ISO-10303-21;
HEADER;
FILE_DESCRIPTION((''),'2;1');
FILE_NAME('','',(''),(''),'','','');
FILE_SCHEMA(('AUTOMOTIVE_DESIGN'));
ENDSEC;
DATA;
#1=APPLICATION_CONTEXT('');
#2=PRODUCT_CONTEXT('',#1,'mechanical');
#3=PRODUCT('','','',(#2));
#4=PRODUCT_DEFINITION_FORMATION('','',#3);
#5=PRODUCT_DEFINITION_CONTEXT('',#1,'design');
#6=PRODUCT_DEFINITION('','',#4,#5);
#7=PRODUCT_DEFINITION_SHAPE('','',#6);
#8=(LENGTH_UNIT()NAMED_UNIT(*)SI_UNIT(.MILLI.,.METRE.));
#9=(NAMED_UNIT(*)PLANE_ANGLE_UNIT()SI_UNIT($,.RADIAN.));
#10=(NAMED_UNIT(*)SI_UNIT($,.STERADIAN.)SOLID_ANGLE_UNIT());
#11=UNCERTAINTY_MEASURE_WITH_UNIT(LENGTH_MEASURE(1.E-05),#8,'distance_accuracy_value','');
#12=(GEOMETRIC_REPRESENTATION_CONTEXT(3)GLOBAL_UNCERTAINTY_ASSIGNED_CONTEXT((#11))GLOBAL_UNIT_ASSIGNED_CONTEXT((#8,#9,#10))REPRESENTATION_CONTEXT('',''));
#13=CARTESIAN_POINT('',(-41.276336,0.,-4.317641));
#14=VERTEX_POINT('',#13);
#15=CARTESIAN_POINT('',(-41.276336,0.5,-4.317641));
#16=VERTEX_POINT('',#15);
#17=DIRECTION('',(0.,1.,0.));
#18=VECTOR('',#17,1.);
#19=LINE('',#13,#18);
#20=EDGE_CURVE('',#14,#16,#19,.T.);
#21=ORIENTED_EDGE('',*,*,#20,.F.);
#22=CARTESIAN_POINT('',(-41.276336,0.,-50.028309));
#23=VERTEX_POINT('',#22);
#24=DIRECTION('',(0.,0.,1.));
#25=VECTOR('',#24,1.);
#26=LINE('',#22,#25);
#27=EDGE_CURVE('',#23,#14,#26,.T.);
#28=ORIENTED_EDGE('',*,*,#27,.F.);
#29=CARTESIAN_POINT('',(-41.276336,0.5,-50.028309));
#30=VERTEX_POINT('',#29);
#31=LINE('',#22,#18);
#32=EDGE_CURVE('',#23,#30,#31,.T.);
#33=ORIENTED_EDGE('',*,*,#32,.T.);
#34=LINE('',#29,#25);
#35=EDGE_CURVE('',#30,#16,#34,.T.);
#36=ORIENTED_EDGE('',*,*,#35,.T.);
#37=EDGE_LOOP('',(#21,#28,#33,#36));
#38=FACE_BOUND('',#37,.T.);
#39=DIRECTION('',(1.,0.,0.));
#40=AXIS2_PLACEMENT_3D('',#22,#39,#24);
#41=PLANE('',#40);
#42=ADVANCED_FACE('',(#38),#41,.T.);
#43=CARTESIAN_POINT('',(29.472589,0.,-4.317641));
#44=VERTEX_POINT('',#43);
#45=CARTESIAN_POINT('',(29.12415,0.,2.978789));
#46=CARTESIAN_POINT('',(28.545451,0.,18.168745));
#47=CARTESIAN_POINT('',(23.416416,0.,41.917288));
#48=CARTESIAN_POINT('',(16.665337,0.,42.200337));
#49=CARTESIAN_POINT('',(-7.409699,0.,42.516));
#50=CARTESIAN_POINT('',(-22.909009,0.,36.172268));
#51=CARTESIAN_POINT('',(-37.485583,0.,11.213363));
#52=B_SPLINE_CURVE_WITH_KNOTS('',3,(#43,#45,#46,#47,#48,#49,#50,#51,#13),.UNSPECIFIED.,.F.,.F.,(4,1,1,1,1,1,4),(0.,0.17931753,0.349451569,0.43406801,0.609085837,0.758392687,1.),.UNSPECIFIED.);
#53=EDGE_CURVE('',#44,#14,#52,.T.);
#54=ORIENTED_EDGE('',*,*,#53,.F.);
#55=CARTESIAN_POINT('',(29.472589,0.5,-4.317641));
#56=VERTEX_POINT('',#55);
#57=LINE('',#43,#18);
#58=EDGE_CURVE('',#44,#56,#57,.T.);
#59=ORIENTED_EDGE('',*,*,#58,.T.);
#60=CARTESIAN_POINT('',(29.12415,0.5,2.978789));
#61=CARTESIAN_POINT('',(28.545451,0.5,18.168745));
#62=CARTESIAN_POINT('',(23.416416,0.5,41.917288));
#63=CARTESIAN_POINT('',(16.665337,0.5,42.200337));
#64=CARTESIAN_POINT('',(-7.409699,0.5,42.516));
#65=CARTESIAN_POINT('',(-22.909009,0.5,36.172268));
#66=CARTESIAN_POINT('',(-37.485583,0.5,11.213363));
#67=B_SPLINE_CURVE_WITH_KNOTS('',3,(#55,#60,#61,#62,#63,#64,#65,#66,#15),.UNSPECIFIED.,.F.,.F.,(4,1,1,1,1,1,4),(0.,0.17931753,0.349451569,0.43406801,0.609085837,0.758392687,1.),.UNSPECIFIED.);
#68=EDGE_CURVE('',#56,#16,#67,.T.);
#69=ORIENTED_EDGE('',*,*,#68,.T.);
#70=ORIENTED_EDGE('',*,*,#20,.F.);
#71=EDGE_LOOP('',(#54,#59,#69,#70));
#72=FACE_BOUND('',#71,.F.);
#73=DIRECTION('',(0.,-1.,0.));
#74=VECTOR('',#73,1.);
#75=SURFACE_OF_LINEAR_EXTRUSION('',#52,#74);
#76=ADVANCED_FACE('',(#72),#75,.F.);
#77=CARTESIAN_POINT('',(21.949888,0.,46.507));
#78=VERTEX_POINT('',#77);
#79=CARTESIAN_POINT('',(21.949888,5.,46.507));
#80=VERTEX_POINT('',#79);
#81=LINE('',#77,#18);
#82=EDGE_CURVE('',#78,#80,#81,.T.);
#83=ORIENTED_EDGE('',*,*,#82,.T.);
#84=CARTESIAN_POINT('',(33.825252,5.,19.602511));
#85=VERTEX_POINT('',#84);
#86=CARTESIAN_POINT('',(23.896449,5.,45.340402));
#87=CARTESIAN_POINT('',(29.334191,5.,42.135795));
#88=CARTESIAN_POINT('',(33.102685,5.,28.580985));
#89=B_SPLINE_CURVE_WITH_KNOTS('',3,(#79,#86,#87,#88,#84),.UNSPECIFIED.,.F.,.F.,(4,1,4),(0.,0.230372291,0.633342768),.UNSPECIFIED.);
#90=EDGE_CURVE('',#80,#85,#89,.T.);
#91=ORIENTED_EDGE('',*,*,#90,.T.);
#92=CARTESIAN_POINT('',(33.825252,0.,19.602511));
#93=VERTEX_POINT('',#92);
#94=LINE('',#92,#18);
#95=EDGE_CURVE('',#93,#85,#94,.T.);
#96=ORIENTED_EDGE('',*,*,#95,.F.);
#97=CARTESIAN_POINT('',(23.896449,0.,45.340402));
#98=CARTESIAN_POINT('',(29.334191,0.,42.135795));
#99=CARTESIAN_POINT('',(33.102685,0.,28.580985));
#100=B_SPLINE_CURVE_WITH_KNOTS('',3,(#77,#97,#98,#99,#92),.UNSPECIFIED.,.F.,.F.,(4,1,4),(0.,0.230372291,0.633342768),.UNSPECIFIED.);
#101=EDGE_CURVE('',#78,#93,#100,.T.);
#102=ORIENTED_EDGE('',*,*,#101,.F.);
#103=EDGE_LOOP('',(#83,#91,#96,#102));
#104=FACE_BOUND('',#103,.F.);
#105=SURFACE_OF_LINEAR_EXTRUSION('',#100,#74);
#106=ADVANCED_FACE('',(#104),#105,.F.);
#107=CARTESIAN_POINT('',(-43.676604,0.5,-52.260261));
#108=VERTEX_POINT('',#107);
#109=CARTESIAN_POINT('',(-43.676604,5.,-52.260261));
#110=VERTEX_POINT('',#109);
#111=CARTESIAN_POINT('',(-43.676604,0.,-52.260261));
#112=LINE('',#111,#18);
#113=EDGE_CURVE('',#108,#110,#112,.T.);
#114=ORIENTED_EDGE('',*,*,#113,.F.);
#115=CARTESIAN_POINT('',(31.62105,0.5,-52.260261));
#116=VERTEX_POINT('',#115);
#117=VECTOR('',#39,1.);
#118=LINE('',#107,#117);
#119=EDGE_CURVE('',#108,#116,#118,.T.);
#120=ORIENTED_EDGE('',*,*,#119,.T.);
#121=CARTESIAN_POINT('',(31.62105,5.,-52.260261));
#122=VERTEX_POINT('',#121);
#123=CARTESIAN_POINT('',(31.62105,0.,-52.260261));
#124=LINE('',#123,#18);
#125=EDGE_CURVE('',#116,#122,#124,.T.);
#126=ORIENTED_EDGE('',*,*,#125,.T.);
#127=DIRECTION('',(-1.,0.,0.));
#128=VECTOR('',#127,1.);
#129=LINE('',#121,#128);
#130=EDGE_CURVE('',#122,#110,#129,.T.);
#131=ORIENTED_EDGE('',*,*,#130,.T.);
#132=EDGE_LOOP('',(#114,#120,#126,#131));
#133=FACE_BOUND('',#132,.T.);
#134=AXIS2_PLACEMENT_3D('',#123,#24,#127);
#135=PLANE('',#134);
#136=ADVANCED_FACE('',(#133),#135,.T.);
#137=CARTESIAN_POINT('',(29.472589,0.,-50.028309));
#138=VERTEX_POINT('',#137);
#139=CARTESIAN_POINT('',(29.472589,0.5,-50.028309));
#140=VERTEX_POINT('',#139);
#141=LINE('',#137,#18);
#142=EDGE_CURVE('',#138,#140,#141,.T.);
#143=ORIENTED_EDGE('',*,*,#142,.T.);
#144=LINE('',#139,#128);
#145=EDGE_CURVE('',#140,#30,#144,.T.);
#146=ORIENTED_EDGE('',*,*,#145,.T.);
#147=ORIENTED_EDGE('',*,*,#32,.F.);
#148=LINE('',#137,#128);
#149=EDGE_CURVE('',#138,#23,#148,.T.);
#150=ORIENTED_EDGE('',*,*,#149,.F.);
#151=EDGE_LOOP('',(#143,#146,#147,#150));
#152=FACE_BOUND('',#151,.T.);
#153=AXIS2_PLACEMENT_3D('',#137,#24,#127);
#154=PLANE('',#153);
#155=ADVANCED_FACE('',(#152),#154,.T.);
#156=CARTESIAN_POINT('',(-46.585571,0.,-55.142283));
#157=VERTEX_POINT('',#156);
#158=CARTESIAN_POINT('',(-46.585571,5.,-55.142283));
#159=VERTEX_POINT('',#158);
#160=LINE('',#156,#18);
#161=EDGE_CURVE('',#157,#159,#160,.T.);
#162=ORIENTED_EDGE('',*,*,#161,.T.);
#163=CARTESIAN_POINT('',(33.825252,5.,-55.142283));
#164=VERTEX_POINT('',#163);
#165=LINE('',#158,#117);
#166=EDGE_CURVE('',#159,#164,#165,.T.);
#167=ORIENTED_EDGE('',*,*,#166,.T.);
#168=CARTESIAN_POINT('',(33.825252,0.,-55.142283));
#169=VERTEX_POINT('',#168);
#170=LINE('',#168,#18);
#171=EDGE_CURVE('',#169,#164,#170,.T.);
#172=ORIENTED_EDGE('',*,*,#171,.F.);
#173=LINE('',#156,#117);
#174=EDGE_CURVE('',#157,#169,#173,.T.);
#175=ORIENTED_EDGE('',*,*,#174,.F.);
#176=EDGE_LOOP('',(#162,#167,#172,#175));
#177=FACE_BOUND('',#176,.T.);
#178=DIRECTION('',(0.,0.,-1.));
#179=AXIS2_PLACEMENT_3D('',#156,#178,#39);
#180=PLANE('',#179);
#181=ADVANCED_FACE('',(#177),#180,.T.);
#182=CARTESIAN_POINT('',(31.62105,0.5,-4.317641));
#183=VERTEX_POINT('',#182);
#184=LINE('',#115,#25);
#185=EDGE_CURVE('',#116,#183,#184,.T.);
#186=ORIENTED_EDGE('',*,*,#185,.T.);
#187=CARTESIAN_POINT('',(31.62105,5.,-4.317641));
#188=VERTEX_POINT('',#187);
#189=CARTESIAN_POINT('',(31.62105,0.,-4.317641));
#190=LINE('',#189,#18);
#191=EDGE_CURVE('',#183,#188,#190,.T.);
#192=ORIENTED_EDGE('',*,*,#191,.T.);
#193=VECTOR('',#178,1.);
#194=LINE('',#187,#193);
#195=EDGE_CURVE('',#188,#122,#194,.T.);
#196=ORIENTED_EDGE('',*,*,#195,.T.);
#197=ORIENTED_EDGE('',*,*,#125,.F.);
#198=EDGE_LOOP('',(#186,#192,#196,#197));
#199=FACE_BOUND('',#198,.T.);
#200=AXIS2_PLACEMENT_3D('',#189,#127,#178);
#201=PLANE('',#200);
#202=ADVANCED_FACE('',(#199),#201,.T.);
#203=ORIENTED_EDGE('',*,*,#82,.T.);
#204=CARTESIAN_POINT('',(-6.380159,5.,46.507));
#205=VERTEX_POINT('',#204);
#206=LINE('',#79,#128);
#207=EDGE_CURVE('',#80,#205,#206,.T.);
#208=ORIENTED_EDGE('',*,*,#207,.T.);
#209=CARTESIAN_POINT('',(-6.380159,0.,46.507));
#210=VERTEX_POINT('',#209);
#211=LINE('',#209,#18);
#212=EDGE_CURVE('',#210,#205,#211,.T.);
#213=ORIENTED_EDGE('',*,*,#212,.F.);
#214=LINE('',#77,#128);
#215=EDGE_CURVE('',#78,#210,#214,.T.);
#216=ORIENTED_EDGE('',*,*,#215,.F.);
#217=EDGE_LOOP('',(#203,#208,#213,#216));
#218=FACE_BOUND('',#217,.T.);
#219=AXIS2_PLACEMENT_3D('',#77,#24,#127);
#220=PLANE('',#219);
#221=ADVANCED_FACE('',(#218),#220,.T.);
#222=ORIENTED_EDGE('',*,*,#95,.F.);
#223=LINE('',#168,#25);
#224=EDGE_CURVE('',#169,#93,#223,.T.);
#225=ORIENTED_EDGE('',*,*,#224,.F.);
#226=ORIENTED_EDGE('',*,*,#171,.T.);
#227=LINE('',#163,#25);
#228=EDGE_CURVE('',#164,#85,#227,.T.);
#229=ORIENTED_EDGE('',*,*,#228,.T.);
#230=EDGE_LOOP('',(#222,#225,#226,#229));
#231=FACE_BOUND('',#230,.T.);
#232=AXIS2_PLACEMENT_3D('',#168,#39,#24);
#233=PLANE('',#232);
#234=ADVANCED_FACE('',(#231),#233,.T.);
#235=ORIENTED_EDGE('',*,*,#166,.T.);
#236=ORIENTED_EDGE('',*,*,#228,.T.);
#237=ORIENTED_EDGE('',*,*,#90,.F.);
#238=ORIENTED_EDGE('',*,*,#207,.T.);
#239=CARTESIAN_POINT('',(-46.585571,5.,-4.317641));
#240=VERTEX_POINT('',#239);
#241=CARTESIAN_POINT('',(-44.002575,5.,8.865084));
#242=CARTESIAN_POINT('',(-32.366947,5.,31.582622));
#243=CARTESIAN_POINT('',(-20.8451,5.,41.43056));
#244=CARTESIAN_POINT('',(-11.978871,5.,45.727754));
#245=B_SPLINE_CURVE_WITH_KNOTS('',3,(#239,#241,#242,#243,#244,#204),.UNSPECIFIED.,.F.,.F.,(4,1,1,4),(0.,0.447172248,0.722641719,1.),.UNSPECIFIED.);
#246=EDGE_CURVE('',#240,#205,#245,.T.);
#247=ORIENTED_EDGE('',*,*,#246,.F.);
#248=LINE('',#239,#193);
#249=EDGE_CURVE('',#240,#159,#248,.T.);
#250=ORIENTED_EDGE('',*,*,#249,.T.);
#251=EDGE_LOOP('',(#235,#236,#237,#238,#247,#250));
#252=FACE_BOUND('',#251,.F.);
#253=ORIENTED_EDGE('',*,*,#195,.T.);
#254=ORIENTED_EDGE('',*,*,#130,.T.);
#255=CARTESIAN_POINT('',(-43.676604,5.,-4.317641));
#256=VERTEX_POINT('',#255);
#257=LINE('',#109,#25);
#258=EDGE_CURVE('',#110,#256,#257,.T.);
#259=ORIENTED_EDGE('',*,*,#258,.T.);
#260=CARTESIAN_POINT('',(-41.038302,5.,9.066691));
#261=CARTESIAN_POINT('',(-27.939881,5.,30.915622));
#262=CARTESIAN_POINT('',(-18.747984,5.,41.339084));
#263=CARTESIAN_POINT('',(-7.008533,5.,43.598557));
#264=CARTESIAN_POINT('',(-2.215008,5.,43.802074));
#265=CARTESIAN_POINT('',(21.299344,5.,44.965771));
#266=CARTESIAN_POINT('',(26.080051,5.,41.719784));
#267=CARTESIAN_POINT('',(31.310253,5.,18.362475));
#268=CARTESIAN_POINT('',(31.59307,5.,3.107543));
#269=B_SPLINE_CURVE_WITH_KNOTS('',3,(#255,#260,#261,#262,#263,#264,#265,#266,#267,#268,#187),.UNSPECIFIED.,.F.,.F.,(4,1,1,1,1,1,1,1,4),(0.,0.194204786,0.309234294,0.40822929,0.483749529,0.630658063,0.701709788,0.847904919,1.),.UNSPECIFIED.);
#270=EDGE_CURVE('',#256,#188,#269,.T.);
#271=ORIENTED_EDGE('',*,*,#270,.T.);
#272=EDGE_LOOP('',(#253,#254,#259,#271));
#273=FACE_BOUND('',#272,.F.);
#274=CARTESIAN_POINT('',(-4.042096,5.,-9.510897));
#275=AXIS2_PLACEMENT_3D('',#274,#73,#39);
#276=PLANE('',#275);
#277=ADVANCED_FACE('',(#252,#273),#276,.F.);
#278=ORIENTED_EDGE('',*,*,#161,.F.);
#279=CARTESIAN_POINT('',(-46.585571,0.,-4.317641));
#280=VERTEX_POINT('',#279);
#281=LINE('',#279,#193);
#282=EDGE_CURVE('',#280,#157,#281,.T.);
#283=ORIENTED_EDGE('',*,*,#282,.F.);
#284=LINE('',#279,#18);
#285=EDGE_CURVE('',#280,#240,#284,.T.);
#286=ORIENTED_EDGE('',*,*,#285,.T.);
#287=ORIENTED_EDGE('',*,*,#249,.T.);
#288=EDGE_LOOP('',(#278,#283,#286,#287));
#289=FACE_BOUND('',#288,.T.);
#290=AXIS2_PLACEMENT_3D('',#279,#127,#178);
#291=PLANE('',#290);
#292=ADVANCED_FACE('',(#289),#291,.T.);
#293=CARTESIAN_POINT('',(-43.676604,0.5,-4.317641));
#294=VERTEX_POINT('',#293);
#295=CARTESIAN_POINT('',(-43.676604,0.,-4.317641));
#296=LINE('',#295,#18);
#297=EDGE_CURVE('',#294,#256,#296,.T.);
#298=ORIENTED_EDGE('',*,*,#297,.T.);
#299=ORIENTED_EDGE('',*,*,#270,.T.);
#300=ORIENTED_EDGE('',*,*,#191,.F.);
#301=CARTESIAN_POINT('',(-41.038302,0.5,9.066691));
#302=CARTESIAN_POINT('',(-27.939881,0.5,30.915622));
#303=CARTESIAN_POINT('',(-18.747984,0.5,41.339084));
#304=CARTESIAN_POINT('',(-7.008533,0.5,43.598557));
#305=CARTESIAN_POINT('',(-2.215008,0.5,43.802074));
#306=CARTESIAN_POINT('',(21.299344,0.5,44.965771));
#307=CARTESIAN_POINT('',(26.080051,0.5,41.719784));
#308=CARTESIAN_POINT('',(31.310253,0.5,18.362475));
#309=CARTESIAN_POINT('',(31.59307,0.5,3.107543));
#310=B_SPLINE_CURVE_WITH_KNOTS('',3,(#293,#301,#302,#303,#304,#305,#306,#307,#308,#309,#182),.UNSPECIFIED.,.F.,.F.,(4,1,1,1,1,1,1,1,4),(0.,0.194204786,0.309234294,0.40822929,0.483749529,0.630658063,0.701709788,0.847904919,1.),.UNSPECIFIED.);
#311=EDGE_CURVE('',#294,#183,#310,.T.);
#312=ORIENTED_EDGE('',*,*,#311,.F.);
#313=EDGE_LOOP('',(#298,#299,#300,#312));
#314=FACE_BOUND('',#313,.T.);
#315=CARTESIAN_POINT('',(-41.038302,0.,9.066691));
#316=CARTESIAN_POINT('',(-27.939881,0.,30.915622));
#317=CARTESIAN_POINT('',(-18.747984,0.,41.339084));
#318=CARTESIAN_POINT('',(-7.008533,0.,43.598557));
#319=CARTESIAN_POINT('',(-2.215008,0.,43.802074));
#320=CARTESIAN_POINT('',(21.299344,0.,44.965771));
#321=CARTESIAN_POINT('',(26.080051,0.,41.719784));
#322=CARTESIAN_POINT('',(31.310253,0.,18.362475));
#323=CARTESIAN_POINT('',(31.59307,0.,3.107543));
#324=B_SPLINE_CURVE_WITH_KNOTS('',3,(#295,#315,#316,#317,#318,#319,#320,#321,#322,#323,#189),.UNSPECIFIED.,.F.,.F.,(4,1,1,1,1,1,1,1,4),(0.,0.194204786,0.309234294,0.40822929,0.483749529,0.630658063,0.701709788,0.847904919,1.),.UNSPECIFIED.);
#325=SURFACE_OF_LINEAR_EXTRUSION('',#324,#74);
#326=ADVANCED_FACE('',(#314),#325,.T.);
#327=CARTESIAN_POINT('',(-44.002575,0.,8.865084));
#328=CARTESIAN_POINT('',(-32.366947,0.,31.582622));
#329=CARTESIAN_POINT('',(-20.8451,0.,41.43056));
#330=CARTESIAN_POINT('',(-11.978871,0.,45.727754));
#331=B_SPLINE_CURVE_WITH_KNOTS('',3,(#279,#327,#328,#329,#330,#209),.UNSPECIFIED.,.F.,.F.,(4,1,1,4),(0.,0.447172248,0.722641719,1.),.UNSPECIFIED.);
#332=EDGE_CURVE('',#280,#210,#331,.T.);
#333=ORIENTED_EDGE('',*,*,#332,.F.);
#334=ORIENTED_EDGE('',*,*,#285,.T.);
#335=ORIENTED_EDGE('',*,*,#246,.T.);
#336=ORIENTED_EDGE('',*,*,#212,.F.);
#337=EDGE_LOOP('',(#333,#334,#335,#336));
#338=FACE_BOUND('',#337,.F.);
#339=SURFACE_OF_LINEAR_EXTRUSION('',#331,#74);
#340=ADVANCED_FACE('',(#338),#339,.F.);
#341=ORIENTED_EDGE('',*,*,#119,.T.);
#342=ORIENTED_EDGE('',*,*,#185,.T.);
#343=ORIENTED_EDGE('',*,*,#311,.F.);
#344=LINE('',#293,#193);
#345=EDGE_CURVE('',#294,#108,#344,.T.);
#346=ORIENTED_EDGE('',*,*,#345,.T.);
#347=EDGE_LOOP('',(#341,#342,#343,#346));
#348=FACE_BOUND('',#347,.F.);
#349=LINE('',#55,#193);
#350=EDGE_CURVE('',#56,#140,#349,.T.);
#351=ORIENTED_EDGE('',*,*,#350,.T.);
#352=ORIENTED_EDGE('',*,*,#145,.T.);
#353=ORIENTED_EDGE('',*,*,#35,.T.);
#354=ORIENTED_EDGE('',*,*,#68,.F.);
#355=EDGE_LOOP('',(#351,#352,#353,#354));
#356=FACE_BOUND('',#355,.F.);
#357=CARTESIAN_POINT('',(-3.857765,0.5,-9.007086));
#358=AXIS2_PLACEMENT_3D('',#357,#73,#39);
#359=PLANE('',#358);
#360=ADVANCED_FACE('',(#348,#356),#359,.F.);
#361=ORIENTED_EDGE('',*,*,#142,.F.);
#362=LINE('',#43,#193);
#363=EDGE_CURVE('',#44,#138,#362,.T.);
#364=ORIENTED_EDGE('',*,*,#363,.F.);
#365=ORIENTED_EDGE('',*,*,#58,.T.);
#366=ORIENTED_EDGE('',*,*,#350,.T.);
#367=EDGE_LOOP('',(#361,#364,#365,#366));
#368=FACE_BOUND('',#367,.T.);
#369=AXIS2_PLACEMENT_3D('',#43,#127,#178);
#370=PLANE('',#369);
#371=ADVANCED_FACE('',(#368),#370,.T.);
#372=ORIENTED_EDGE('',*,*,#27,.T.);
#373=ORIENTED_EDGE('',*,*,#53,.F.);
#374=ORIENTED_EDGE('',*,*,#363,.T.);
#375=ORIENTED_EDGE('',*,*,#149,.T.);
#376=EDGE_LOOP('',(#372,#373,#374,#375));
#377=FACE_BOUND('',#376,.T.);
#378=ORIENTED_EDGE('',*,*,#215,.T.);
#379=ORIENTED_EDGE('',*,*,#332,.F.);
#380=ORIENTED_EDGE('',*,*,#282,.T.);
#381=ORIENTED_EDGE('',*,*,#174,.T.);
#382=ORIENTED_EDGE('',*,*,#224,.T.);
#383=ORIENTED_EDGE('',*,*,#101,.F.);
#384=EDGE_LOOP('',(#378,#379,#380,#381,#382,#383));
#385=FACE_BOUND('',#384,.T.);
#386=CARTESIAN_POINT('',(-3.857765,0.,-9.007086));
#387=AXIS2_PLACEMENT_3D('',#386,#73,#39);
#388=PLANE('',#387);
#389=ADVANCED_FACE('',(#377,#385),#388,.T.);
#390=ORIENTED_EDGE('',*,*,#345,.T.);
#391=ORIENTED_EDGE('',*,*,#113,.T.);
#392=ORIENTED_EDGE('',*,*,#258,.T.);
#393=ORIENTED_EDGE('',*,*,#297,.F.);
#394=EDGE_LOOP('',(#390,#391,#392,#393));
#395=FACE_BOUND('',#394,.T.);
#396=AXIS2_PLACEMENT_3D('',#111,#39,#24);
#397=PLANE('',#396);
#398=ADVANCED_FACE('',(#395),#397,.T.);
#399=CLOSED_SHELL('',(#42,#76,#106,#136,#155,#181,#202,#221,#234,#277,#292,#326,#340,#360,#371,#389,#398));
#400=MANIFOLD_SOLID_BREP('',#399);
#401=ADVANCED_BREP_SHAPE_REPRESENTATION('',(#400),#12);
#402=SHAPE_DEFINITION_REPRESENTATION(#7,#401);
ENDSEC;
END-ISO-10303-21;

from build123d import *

# Parameters (mm, degrees)
F1_DEPTH = 5
F2_DEPTH = 0.5


with BuildPart() as f1:
    # F0 (on Front) → F1 (new body)
    with BuildSketch(Plane.XZ):
        with BuildLine():
            Line((21.9498877709, 46.5069999899), (-6.3801594079, 46.5069999899))
            add(Edge.make_bspline(
                [(-46.5855710208, -4.3176412582), (-44.0025745855, 8.8650835819), (-32.3669471438, 31.5826223404), (-20.8450996019, 41.430559805), (-11.9788710798, 45.7277535437), (-6.3801594079, 46.5069999899)],
                knots=[0, 0, 0, 0, 0.4471722481, 0.7226417186, 1, 1, 1, 1], degree=3))
            Line((-46.5855710208, -4.3176412582), (-46.5855710208, -55.1422825063))
            Line((-46.5855710208, -55.1422825063), (33.8252522051, -55.1422825063))
            Line((33.8252522051, -55.1422825063), (33.8252522051, 3.3716567512))
            add(Edge.make_bspline(
                [(33.8252522051, 3.4864664458), (33.8224510146, 3.4189701607), (33.823496077, 3.4012213221), (33.8252522051, 3.3716567512)],
                knots=[0.9714616128, 0.9714616128, 0.9714616128, 0.9714616128, 1, 1, 1, 1], degree=3))
            Line((33.8252522051, 3.4864664458), (33.8252522051, 19.6025110781))
            add(Edge.make_bspline(
                [(21.9498877709, 46.5069999899), (23.8964492564, 45.3404017708), (29.3341911452, 42.1357952335), (33.1026848595, 28.5809846581), (33.8252522051, 19.6025110781)],
                knots=[0, 0, 0, 0, 0.2303722913, 0.6333427683, 0.6333427683, 0.6333427683, 0.6333427683], degree=3))
        make_face()
        with BuildLine():
            Line((31.6210500896, -52.260261029), (-43.6766035855, -52.260261029))
            Line((-43.6766035855, -52.260261029), (-43.6766035855, -4.3176412582))
            add(Edge.make_bspline(
                [(-43.6766035855, -4.3176412582), (-41.0383021138, 9.0666906176), (-27.9398807539, 30.9156219348), (-18.7479844266, 41.3390835094), (-7.0085331076, 43.5985571671), (-2.215007715, 43.8020735184), (21.2993443911, 44.9657713637), (26.0800513958, 41.7197839808), (31.3102526714, 18.3624746495), (31.5930695379, 3.1075431018), (31.6210500896, -4.3176412582)],
                knots=[0, 0, 0, 0, 0.1942047864, 0.3092342936, 0.40822929, 0.4837495286, 0.6306580628, 0.7017097882, 0.8479049191, 1, 1, 1, 1], degree=3))
            Line((31.6210500896, -4.3176412582), (31.6210500896, -52.260261029))
        make_face(mode=Mode.SUBTRACT)
        with BuildLine():
            Line((33.8252522051, 3.3716567512), (33.8252522051, 3.4864664458))
            add(Edge.make_bspline(
                [(33.8252522051, 3.4864664458), (33.8224510146, 3.4189701607), (33.823496077, 3.4012213221), (33.8252522051, 3.3716567512)],
                knots=[0.9714616128, 0.9714616128, 0.9714616128, 0.9714616128, 1, 1, 1, 1], degree=3))
        make_face()
    extrude(amount=-F1_DEPTH)

    # F0 (on Front) → F2 (join)
    with BuildSketch(Plane.XZ):
        with BuildLine():
            Line((-43.6766035855, -4.3176412582), (-43.6766035855, -52.260261029))
            Line((-43.6766035855, -52.260261029), (31.6210500896, -52.260261029))
            Line((31.6210500896, -52.260261029), (31.6210500896, -4.3176412582))
            add(Edge.make_bspline(
                [(-43.6766035855, -4.3176412582), (-41.0383021138, 9.0666906176), (-27.9398807539, 30.9156219348), (-18.7479844266, 41.3390835094), (-7.0085331076, 43.5985571671), (-2.215007715, 43.8020735184), (21.2993443911, 44.9657713637), (26.0800513958, 41.7197839808), (31.3102526714, 18.3624746495), (31.5930695379, 3.1075431018), (31.6210500896, -4.3176412582)],
                knots=[0, 0, 0, 0, 0.1942047864, 0.3092342936, 0.40822929, 0.4837495286, 0.6306580628, 0.7017097882, 0.8479049191, 1, 1, 1, 1], degree=3))
        make_face()
        with BuildLine():
            Line((29.4725894928, -50.028309226), (-41.2763357162, -50.028309226))
            Line((-41.2763357162, -50.028309226), (-41.2763357162, -4.3176412582))
            add(Edge.make_bspline(
                [(29.4725894928, -4.3176412582), (29.1241496967, 2.9787885737), (28.5454511929, 18.1687452905), (23.4164160844, 41.9172876242), (16.665337298, 42.2003372333), (-7.4096989865, 42.5160002908), (-22.9090094529, 36.1722681351), (-37.4855825891, 11.2133633357), (-41.2763357162, -4.3176412582)],
                knots=[0, 0, 0, 0, 0.1793175303, 0.3494515687, 0.4340680096, 0.6090858367, 0.7583926872, 1, 1, 1, 1], degree=3))
            Line((29.4725894928, -4.3176412582), (29.4725894928, -50.028309226))
        make_face(mode=Mode.SUBTRACT)
    extrude(amount=-F2_DEPTH)


solid = f1.part
